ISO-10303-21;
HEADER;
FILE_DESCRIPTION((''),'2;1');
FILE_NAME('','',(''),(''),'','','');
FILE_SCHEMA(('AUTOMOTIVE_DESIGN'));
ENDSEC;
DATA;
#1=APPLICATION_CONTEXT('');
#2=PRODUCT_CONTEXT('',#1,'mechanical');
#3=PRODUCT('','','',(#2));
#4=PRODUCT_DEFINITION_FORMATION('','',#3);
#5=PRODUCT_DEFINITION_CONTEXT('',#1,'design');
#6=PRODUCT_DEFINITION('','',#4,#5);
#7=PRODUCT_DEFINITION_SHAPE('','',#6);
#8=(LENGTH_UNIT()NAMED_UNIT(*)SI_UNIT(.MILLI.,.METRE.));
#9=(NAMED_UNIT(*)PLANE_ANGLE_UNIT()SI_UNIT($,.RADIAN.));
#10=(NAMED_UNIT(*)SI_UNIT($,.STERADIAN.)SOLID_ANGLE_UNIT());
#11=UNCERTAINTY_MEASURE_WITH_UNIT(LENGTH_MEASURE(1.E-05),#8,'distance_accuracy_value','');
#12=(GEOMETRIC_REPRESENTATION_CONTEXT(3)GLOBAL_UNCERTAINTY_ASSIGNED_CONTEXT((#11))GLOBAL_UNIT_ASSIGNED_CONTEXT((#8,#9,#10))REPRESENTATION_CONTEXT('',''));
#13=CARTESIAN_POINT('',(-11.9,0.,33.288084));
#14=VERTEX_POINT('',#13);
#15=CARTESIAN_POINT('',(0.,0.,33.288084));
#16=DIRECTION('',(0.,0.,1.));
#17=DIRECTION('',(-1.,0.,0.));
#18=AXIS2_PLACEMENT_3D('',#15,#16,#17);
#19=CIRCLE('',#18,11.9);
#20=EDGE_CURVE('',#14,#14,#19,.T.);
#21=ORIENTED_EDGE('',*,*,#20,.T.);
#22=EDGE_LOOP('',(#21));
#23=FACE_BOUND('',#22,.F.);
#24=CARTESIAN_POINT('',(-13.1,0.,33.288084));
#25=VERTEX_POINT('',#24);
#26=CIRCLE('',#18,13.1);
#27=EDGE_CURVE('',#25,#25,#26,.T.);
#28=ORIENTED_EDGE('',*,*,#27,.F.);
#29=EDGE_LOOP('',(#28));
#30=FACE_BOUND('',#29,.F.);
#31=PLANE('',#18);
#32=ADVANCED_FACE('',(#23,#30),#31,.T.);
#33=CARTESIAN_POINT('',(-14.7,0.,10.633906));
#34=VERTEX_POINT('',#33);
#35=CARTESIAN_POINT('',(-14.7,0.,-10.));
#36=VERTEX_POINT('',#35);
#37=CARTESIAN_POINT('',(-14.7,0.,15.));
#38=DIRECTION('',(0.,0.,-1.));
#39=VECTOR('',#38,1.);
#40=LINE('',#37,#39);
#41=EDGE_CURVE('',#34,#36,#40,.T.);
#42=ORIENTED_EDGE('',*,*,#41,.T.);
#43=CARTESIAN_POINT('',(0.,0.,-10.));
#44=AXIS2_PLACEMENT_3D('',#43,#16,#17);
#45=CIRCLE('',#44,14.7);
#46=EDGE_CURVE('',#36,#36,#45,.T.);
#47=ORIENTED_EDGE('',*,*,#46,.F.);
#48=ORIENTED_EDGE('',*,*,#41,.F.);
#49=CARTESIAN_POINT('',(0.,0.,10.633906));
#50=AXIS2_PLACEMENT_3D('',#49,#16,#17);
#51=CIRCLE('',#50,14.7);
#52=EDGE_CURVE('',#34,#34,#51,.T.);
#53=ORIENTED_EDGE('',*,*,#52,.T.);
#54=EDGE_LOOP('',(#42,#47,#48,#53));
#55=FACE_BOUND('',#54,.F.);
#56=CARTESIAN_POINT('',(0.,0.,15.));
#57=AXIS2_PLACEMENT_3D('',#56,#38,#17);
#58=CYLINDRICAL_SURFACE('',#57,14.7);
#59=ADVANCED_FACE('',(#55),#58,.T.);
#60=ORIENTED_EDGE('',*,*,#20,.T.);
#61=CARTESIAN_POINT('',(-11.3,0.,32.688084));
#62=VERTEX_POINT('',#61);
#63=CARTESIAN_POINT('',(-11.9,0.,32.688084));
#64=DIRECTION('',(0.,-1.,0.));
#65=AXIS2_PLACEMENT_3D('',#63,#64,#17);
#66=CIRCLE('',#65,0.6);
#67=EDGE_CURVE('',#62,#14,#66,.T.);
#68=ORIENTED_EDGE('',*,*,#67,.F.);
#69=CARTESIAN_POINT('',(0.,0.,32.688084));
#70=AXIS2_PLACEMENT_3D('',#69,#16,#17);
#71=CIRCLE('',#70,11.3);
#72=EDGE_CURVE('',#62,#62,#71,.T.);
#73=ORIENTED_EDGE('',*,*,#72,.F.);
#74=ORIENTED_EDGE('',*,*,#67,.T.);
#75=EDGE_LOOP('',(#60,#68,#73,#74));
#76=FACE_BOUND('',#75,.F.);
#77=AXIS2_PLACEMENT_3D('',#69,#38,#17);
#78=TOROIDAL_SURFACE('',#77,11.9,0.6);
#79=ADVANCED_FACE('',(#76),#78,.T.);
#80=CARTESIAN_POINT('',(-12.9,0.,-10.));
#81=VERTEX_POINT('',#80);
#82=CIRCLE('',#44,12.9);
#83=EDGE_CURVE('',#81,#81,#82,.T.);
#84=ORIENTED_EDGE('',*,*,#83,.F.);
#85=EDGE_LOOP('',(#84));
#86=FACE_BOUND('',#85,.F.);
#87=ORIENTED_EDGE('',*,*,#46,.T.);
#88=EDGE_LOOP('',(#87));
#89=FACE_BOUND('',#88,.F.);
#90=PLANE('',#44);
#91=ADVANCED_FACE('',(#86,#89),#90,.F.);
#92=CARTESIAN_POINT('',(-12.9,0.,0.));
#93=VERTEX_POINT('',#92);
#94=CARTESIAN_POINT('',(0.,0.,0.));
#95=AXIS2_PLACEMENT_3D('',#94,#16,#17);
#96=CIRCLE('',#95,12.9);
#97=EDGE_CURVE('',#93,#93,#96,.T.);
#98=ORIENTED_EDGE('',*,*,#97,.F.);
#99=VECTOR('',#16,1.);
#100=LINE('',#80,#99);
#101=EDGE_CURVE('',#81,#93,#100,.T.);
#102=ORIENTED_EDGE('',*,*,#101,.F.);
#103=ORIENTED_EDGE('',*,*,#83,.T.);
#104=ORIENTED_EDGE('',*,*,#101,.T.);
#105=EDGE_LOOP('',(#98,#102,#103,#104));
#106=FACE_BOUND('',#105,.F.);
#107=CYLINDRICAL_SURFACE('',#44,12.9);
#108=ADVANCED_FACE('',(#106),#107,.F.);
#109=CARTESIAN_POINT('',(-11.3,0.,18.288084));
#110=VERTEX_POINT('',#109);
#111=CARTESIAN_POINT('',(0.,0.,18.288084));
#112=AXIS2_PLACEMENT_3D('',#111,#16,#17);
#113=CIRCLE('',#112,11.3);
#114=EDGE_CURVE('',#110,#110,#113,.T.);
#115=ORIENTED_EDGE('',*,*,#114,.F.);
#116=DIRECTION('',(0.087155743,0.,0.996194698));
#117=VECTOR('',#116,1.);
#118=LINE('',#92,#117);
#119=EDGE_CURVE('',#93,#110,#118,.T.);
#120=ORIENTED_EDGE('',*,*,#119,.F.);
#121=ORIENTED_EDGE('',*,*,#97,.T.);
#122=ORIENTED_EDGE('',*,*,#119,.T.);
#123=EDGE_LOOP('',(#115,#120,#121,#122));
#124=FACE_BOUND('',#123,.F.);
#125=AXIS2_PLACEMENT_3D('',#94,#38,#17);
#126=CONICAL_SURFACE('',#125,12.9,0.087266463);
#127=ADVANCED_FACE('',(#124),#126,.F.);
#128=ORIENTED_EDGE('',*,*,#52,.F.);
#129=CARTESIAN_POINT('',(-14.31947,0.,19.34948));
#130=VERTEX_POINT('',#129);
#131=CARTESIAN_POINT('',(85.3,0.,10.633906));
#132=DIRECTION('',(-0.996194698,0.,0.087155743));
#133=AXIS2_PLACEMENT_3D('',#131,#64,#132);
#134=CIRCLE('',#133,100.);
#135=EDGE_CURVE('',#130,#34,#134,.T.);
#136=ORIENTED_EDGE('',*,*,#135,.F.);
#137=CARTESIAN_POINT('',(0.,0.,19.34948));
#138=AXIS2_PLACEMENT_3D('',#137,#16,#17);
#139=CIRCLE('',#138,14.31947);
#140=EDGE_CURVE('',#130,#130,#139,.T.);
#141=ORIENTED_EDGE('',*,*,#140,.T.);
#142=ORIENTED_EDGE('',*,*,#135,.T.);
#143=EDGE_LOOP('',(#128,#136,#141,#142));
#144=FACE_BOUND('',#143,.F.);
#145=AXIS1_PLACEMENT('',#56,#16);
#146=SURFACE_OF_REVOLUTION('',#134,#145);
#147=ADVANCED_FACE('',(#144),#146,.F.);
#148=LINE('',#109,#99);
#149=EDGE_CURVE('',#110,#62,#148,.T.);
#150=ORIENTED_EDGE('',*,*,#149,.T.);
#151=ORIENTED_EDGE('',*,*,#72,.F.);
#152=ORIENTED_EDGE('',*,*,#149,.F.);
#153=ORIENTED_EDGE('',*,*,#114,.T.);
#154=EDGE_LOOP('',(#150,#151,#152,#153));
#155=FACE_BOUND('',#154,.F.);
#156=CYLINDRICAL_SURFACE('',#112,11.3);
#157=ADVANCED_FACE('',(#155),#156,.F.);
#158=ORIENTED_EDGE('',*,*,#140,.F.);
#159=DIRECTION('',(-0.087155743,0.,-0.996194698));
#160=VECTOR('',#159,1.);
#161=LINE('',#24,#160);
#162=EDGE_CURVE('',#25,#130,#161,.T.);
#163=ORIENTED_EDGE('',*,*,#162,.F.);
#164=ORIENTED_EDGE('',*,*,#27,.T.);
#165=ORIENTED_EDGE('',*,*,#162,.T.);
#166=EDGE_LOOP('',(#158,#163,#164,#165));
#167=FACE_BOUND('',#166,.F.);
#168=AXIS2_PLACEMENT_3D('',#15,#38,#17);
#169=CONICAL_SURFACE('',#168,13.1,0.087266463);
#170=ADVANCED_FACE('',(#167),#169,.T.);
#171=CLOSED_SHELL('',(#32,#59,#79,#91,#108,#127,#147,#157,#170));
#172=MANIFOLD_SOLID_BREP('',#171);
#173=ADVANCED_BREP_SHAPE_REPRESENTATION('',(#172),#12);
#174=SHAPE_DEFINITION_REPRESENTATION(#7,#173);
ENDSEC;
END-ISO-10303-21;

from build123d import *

# Parameters (mm, degrees)
F2_R = 0.6


# Not quite as in the source:
# - a fillet or chamfer that OpenCascade refuses, or shapes differently, is made with other operations: its cross-section is extruded or revolved along the edge and cut away or added


with BuildPart() as f1:
    # F0 (on Front) → F1 (revolve)
    with BuildSketch(Plane.XZ):
        Polygon((-14.7, 15), (-14.7, 0), (-14.7, -10), (-12.9, -10), (-12.9, 0), (-11.3, 18.2880836844), (-11.3, 33.2880836844), (-13.1, 33.2880836844), align=None)
    revolve(axis=Axis((0, 0, 16.6440418422), (0, 0, 1)))

    # F2
    f2_edges = [f1.edges().sort_by_distance(p)[0] for p in [
        (11.3, 0, 33.288084),
    ]]
    fillet(f2_edges, radius=F2_R)

    # F3: fillet of radius 100 on 1 edges, made by hand

    # F3_s1 → F3_t2 (revolve, cut)
    with BuildSketch(Plane.XZ):
        with BuildLine():
            ThreePointArc((-14.3194698092, 19.3494799839), (-14.6048221582, 14.9958444457), (-14.7, 10.6339057091))
            Line((-14.7, 10.6339057091), (-14.7, 15))
            Line((-14.7, 15), (-14.3194698092, 19.3494799839))
        make_face()
    revolve(axis=Axis((0, 0, 15), (0, 0, 1)), mode=Mode.SUBTRACT)


solid = f1.part
